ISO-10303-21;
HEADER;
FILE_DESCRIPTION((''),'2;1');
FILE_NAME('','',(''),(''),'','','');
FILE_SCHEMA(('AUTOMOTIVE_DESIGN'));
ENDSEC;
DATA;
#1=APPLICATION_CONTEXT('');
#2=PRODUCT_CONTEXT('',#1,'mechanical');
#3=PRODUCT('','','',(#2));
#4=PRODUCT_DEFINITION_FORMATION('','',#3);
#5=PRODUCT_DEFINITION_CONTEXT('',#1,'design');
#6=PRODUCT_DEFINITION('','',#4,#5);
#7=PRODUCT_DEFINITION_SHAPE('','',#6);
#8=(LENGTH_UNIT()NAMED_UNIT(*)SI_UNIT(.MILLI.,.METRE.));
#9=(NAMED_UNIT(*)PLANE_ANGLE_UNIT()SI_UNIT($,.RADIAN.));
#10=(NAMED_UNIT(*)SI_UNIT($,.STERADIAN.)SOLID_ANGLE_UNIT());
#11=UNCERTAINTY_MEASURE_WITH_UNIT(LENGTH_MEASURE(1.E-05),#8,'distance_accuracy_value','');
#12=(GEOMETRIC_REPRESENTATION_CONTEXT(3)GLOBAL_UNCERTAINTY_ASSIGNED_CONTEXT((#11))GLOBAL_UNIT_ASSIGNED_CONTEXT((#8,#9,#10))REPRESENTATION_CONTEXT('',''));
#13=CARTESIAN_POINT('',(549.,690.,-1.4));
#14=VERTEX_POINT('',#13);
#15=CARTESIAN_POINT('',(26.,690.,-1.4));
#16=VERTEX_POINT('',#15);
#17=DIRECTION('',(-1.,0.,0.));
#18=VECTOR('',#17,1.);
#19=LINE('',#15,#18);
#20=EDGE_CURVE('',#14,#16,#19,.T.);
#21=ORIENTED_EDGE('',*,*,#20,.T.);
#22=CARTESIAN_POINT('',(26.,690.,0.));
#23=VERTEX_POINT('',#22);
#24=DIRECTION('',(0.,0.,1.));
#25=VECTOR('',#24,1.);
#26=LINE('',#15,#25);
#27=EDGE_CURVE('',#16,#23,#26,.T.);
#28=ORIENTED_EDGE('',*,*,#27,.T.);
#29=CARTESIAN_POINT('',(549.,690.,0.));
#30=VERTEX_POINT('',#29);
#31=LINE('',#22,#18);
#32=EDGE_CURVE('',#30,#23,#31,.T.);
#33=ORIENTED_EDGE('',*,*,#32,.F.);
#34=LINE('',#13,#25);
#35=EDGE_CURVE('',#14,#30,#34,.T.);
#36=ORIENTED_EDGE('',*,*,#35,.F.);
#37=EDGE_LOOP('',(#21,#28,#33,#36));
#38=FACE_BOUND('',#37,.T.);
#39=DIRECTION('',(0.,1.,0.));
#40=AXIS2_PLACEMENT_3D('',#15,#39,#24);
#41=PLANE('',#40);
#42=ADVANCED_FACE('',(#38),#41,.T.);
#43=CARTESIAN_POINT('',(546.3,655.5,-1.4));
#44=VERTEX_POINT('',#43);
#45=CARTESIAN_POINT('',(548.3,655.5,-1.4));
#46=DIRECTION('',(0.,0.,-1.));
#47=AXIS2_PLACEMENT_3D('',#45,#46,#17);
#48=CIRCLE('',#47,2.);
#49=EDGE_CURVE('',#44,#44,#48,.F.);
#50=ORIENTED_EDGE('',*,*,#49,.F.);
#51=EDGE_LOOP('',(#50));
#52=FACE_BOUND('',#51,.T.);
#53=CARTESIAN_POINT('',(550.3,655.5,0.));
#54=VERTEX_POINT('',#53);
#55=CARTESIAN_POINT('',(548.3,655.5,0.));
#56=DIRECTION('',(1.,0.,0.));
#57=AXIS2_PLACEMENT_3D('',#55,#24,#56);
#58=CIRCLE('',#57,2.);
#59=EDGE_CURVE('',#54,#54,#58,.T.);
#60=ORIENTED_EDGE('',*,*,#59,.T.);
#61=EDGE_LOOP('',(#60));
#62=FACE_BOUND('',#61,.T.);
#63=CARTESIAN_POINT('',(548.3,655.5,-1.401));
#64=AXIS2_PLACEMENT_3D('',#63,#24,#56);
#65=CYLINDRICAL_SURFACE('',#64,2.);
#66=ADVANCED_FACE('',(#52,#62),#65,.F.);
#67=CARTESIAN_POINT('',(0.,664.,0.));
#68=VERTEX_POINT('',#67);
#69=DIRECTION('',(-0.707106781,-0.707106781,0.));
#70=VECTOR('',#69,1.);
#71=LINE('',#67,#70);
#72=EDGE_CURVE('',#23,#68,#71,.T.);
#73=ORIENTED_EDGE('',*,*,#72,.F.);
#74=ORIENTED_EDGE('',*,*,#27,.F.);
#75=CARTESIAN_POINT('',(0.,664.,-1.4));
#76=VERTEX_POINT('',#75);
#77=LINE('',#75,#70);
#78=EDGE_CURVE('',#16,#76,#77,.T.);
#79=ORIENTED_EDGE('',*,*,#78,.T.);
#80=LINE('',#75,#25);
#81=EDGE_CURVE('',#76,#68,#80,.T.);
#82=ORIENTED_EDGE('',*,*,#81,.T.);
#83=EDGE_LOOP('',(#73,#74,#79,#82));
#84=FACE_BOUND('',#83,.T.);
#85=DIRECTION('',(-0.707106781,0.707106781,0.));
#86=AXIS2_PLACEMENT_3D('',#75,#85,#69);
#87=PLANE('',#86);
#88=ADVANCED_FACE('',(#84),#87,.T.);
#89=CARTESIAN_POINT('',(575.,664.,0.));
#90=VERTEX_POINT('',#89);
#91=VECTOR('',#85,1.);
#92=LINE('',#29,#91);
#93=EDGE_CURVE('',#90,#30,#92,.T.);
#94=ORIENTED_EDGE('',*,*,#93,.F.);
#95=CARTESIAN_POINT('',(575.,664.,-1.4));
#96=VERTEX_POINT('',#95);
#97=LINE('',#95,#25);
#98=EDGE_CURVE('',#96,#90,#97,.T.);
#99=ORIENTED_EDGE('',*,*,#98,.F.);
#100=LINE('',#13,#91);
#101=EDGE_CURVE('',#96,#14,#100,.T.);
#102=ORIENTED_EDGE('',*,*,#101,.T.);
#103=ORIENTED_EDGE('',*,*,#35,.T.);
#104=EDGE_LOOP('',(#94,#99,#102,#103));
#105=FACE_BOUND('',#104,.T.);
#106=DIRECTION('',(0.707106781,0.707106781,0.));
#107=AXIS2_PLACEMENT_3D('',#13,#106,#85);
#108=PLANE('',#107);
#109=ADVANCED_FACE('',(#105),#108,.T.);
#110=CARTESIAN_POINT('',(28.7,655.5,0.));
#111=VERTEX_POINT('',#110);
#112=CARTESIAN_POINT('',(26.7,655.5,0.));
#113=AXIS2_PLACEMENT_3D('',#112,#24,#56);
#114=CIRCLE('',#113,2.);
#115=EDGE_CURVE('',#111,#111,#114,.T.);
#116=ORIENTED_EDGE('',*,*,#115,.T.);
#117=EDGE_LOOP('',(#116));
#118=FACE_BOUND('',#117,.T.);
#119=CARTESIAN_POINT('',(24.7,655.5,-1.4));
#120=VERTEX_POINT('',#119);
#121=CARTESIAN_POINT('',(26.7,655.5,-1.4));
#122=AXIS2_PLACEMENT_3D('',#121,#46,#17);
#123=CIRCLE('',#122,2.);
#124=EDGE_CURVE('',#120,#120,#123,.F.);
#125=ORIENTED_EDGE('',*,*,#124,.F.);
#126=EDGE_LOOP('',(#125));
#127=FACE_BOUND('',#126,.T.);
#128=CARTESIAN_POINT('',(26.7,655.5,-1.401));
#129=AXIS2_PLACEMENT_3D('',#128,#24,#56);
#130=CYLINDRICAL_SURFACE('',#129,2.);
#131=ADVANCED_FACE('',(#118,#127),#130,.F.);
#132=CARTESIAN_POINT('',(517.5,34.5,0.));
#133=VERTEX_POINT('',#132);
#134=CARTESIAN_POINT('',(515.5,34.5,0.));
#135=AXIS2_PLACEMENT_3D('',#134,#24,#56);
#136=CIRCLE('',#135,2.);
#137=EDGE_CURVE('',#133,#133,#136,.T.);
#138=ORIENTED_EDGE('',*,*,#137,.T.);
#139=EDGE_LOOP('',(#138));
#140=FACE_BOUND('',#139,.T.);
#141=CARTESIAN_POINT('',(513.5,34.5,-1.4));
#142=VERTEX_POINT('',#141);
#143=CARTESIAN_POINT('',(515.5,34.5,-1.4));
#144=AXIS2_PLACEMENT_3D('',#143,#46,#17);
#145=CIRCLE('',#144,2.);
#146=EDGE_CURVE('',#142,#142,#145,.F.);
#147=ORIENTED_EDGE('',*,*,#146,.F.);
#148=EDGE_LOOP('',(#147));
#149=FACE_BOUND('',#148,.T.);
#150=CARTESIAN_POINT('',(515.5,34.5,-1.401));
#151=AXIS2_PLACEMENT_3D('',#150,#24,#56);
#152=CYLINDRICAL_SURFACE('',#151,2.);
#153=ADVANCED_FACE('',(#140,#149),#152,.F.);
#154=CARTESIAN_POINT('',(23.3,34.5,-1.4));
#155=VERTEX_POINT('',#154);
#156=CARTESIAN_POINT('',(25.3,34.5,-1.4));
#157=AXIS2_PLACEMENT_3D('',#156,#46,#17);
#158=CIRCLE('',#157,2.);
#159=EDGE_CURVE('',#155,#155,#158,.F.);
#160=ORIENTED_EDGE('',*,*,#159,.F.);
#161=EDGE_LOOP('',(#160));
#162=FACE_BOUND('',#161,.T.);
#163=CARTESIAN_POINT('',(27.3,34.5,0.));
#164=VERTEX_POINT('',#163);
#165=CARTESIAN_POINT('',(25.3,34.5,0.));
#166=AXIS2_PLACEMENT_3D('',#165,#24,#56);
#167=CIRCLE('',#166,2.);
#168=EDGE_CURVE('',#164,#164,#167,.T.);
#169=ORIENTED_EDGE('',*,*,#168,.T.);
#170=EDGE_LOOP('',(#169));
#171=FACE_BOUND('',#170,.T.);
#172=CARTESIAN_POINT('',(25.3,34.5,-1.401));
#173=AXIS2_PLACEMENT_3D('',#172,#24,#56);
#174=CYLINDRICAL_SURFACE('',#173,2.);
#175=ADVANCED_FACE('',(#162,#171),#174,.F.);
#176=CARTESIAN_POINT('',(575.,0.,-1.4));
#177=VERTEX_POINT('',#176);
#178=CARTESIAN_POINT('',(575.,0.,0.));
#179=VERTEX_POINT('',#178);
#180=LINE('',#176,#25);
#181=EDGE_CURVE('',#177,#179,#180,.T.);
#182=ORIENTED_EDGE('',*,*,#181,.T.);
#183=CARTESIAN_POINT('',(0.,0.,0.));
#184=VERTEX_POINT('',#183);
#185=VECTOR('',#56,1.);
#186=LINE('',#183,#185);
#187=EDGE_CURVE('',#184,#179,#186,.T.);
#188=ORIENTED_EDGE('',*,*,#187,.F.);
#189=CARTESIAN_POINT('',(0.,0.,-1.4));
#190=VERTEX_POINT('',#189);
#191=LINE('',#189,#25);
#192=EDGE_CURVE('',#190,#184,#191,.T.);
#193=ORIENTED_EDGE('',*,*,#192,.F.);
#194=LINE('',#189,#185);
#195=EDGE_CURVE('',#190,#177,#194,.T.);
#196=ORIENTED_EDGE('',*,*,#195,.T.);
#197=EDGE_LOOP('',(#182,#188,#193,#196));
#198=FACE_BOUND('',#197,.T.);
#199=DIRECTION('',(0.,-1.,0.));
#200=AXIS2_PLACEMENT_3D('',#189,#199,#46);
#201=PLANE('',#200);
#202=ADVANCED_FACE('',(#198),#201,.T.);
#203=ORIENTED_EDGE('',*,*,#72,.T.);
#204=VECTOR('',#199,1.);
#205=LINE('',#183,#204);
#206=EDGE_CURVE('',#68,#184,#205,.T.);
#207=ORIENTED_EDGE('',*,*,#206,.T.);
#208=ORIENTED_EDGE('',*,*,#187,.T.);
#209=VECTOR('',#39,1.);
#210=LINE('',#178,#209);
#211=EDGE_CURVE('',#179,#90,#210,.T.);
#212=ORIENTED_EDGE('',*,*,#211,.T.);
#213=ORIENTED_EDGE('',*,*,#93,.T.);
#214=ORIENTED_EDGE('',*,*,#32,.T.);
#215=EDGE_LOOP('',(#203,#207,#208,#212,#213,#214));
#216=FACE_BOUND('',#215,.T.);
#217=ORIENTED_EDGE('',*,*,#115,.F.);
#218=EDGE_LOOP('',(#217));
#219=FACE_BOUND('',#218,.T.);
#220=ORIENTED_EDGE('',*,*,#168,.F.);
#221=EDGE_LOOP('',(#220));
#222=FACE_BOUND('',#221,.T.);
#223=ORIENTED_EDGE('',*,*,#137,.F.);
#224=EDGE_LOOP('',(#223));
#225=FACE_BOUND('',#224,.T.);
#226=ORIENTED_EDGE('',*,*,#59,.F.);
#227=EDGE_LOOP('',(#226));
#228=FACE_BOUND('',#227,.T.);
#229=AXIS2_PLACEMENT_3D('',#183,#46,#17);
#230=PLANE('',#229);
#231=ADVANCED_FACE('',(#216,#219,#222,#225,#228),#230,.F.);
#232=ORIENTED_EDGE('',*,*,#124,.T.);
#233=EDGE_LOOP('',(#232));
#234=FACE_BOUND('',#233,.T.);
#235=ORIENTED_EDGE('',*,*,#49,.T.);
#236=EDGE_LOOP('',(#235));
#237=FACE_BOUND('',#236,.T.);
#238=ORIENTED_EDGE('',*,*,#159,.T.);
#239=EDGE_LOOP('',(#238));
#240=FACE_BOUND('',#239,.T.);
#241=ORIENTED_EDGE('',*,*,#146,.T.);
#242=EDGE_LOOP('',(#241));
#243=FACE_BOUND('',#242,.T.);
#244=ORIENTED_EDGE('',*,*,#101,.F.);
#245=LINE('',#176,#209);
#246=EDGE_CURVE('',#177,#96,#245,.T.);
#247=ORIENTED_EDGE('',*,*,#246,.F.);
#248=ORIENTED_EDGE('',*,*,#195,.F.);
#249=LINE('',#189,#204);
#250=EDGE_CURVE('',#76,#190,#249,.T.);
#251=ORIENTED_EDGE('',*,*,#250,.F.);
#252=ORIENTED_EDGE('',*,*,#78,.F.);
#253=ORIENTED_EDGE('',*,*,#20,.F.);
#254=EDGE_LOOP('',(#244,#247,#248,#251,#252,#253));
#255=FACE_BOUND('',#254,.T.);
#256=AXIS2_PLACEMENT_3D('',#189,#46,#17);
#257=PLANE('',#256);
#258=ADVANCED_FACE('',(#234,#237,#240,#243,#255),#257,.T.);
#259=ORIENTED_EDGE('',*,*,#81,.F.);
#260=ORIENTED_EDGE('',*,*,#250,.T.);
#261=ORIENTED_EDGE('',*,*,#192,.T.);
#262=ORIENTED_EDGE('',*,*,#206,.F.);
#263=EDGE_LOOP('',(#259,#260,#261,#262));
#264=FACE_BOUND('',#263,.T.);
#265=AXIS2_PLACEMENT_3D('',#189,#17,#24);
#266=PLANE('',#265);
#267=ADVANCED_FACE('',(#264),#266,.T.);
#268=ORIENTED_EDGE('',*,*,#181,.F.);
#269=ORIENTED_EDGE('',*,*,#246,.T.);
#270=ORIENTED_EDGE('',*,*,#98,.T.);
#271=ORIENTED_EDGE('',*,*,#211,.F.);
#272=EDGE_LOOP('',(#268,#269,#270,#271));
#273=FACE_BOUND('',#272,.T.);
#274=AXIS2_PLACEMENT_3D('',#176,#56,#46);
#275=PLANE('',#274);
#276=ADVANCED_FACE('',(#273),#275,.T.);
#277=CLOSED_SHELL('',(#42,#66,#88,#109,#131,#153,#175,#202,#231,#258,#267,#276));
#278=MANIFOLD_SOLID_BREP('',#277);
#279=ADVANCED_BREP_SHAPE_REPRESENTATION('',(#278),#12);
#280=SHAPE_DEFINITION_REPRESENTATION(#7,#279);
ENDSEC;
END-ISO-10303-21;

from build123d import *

# Parameters (mm, degrees)
BASE_FLANGE1_DEPTH = 1.4
CUT_EXTRUDE1_REACH = 900.18
SKETCH6_R          = 2


# Sheet-metal steps are written as plain solids
with BuildPart() as part:
    # Sketch1 → Base-Flange1 (new body)
    with BuildSketch(Plane.XY):
        Polygon((0, 664), (26, 690), (549, 690), (575, 664), (575, 0), (0, 0), align=None)
    extrude(amount=-BASE_FLANGE1_DEPTH)

    # Sketch6 → Cut-Extrude1 (cut, up to next)
    with BuildSketch(Plane.XY, mode=Mode.PRIVATE) as cut_extrude1_sk1:
        with Locations((26.7, 655.5)):
            Circle(SKETCH6_R)
    cut_extrude1_tool1 = extrude(cut_extrude1_sk1.sketch, amount=-CUT_EXTRUDE1_REACH, mode=Mode.PRIVATE) & part.part
    # Sketch6 → Cut-Extrude1 (cut, up to next)
    with BuildSketch(Plane.XY, mode=Mode.PRIVATE) as cut_extrude1_sk2:
        with Locations((548.3, 655.5)):
            Circle(SKETCH6_R)
    cut_extrude1_tool2 = extrude(cut_extrude1_sk2.sketch, amount=-CUT_EXTRUDE1_REACH, mode=Mode.PRIVATE) & part.part
    # Sketch6 → Cut-Extrude1 (cut, up to next)
    with BuildSketch(Plane.XY, mode=Mode.PRIVATE) as cut_extrude1_sk3:
        with Locations((25.3, 34.5)):
            Circle(SKETCH6_R)
    cut_extrude1_tool3 = extrude(cut_extrude1_sk3.sketch, amount=-CUT_EXTRUDE1_REACH, mode=Mode.PRIVATE) & part.part
    # Sketch6 → Cut-Extrude1 (cut, up to next)
    with BuildSketch(Plane.XY, mode=Mode.PRIVATE) as cut_extrude1_sk4:
        with Locations((515.5, 34.5)):
            Circle(SKETCH6_R)
    cut_extrude1_tool4 = extrude(cut_extrude1_sk4.sketch, amount=-CUT_EXTRUDE1_REACH, mode=Mode.PRIVATE) & part.part
    add(cut_extrude1_tool1.solids().sort_by_distance((26.7, 655.5, 0))[0], mode=Mode.SUBTRACT)
    add(cut_extrude1_tool2.solids().sort_by_distance((548.3, 655.5, 0))[0], mode=Mode.SUBTRACT)
    add(cut_extrude1_tool3.solids().sort_by_distance((25.3, 34.5, 0))[0], mode=Mode.SUBTRACT)
    add(cut_extrude1_tool4.solids().sort_by_distance((515.5, 34.5, 0))[0], mode=Mode.SUBTRACT)


solid = part.part
